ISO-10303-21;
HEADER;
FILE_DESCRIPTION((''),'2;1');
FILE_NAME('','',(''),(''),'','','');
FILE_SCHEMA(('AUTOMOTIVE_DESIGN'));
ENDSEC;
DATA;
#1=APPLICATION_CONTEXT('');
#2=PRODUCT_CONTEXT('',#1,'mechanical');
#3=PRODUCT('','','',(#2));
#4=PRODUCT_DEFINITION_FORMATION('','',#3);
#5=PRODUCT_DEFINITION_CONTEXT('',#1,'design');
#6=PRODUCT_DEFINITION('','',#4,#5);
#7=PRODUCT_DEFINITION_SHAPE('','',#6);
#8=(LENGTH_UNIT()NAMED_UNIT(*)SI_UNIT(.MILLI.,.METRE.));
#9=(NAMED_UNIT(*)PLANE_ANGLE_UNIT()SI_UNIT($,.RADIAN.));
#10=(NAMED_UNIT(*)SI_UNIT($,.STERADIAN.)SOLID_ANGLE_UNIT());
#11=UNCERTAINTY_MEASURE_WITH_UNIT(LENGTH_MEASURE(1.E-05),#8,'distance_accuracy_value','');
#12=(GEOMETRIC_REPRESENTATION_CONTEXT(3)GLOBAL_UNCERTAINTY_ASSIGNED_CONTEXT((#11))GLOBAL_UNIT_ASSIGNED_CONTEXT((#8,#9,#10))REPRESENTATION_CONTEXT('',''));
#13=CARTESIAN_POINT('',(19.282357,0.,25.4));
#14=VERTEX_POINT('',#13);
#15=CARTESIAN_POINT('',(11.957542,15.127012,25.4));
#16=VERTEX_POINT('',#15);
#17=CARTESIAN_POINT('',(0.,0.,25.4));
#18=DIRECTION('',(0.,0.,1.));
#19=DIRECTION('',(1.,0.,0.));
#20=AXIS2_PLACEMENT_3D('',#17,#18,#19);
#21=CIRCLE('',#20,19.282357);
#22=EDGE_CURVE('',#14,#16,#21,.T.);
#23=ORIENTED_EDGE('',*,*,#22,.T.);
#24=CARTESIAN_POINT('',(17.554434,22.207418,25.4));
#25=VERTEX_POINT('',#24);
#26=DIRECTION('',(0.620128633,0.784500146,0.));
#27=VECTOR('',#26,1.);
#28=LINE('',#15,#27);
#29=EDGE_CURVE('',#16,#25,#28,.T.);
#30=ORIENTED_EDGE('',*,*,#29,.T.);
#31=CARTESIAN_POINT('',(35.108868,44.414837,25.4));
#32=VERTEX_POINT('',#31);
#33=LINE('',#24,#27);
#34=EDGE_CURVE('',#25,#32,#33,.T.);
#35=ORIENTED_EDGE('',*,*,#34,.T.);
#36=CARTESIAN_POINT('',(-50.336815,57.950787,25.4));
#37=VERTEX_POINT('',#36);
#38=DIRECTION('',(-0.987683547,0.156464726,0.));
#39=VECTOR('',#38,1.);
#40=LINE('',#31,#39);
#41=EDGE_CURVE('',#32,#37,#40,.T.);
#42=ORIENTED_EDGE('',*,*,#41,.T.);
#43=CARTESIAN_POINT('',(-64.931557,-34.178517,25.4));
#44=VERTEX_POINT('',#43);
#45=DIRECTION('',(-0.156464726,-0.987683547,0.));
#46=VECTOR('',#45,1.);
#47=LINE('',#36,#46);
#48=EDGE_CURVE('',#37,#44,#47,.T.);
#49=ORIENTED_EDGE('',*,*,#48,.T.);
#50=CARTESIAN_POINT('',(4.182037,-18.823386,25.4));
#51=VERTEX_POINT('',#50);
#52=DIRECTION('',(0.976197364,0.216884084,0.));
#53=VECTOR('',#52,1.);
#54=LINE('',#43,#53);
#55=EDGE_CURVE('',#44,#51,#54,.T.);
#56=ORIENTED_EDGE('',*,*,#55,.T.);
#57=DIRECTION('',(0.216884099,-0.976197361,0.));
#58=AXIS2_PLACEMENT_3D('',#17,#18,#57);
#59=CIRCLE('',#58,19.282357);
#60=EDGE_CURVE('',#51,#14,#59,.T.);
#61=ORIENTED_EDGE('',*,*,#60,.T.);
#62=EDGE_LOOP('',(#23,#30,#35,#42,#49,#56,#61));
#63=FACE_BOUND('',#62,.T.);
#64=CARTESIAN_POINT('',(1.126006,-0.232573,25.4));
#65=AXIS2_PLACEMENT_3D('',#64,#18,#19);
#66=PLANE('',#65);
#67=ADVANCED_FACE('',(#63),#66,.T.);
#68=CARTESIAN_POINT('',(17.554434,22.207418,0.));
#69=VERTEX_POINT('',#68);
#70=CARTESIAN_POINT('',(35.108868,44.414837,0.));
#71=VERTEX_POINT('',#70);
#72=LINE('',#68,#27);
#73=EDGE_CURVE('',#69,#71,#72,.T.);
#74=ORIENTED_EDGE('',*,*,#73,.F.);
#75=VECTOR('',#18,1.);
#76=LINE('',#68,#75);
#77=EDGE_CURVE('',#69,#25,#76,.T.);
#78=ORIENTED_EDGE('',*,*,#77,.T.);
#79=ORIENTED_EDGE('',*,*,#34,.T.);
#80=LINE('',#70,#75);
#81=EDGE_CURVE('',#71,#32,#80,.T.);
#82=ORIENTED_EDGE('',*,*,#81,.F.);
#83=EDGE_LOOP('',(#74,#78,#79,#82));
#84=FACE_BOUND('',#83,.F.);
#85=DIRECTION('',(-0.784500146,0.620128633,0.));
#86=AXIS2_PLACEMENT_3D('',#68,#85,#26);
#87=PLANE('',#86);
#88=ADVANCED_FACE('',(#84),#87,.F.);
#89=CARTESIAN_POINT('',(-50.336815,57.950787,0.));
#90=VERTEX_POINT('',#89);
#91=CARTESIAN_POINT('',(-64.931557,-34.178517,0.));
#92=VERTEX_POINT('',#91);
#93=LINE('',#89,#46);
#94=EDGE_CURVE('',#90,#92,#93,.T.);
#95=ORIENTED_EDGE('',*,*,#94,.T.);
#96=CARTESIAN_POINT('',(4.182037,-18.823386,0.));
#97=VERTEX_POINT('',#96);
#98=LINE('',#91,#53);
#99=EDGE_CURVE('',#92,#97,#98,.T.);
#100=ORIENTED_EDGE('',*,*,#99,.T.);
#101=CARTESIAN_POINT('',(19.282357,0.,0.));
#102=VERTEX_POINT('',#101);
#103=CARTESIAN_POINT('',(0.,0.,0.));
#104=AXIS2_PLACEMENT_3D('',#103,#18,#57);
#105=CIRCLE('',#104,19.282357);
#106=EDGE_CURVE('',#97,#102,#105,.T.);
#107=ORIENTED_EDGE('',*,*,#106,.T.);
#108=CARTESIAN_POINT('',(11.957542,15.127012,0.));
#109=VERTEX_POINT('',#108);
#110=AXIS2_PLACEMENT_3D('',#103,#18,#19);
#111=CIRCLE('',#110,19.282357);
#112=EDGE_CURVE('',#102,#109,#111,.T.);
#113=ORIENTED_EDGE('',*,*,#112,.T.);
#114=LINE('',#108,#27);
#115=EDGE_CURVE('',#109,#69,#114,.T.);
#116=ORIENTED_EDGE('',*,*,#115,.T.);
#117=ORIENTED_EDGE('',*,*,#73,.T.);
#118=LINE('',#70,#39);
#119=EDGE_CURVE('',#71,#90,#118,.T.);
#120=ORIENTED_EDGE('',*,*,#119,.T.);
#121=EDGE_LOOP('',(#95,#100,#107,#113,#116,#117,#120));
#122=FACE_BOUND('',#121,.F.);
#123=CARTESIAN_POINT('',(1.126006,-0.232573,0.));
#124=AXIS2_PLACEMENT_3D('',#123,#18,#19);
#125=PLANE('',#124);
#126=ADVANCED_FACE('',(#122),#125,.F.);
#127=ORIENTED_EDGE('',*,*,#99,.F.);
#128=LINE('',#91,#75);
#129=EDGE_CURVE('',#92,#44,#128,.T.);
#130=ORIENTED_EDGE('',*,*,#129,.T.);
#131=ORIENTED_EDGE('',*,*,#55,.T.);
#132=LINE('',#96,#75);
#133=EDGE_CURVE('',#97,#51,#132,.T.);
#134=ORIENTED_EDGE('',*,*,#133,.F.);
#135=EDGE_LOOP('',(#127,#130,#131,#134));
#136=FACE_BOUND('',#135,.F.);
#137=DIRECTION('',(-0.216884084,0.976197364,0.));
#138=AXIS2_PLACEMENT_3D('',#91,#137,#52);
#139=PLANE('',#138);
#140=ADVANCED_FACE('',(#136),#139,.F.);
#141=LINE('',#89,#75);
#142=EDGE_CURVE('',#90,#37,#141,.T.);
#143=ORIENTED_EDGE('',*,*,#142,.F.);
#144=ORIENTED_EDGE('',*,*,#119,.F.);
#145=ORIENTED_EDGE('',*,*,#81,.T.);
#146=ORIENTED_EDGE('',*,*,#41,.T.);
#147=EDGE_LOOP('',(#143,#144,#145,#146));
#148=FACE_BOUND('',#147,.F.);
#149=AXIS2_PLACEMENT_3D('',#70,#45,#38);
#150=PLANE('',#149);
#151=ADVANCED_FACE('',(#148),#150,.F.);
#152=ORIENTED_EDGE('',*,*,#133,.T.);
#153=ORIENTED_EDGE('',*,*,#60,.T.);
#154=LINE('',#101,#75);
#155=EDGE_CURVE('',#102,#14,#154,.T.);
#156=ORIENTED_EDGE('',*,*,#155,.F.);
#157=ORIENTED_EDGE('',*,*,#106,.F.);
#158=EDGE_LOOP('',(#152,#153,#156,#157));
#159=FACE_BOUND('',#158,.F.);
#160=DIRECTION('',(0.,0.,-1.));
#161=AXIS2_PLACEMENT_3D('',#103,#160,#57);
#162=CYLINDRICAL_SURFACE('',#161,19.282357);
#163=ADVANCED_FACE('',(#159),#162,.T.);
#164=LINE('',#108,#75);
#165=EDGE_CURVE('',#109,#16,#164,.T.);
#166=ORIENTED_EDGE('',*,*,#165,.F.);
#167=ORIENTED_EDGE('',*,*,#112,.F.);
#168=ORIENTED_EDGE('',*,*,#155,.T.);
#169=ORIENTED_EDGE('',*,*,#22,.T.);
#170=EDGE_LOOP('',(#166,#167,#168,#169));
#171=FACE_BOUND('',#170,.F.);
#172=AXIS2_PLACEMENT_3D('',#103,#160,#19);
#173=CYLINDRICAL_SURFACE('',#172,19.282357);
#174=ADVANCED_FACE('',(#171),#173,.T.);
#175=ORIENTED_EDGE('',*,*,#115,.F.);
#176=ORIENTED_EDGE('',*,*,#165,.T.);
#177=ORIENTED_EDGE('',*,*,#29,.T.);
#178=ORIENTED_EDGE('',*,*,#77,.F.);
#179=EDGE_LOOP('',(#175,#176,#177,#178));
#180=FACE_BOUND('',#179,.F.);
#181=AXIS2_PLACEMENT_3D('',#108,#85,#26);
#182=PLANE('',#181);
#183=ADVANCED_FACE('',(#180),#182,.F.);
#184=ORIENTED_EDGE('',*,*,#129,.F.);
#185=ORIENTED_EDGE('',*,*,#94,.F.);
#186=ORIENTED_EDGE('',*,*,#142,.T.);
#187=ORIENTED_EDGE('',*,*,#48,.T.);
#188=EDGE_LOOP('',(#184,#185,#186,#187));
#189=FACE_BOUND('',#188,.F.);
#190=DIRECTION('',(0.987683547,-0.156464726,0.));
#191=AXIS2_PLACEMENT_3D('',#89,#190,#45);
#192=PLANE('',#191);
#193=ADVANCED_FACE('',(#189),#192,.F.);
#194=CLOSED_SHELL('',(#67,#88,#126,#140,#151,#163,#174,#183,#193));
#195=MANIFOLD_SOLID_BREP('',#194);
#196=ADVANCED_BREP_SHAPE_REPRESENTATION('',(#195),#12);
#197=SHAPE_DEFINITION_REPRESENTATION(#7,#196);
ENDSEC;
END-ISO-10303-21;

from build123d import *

# Parameters (mm, degrees)
F1_DEPTH = 25.4


# Not quite as in the source:
# - the program builds the solid bodies; features that only make, move or delete a surface that nothing else refers to are left out


with BuildPart() as f1:
    # F0 (on Top) → F1 (new body)
    with BuildSketch(Plane.XY):
        with BuildLine():
            ThreePointArc((19.282356954, 0), (17.3548102292, 8.4035618406), (11.957541655, 15.127011842))
            ThreePointArc((11.957541655, 15.127011842), (-18.7957142624, 4.3046968609), (4.1820366195, -18.823385971))
            ThreePointArc((4.1820366195, -18.823385971), (15.0407581689, -12.0658560991), (19.282356954, 0))
        make_face()
        with BuildLine():
            Line((11.957541655, 15.127011842), (17.5544340163, 22.2074184567))
            Line((17.5544340163, 22.2074184567), (35.1088680327, 44.4148369133))
            Line((35.1088680327, 44.4148369133), (-50.3368154168, 57.9507872462))
            Line((-50.3368154168, 57.9507872462), (-64.9315572131, -34.1785170794))
            Line((-64.9315572131, -34.1785170794), (4.1820366195, -18.823385971))
            ThreePointArc((4.1820366195, -18.823385971), (-18.7957142624, 4.3046968609), (11.957541655, 15.127011842))
        make_face()
    extrude(amount=F1_DEPTH)


solid = f1.part
